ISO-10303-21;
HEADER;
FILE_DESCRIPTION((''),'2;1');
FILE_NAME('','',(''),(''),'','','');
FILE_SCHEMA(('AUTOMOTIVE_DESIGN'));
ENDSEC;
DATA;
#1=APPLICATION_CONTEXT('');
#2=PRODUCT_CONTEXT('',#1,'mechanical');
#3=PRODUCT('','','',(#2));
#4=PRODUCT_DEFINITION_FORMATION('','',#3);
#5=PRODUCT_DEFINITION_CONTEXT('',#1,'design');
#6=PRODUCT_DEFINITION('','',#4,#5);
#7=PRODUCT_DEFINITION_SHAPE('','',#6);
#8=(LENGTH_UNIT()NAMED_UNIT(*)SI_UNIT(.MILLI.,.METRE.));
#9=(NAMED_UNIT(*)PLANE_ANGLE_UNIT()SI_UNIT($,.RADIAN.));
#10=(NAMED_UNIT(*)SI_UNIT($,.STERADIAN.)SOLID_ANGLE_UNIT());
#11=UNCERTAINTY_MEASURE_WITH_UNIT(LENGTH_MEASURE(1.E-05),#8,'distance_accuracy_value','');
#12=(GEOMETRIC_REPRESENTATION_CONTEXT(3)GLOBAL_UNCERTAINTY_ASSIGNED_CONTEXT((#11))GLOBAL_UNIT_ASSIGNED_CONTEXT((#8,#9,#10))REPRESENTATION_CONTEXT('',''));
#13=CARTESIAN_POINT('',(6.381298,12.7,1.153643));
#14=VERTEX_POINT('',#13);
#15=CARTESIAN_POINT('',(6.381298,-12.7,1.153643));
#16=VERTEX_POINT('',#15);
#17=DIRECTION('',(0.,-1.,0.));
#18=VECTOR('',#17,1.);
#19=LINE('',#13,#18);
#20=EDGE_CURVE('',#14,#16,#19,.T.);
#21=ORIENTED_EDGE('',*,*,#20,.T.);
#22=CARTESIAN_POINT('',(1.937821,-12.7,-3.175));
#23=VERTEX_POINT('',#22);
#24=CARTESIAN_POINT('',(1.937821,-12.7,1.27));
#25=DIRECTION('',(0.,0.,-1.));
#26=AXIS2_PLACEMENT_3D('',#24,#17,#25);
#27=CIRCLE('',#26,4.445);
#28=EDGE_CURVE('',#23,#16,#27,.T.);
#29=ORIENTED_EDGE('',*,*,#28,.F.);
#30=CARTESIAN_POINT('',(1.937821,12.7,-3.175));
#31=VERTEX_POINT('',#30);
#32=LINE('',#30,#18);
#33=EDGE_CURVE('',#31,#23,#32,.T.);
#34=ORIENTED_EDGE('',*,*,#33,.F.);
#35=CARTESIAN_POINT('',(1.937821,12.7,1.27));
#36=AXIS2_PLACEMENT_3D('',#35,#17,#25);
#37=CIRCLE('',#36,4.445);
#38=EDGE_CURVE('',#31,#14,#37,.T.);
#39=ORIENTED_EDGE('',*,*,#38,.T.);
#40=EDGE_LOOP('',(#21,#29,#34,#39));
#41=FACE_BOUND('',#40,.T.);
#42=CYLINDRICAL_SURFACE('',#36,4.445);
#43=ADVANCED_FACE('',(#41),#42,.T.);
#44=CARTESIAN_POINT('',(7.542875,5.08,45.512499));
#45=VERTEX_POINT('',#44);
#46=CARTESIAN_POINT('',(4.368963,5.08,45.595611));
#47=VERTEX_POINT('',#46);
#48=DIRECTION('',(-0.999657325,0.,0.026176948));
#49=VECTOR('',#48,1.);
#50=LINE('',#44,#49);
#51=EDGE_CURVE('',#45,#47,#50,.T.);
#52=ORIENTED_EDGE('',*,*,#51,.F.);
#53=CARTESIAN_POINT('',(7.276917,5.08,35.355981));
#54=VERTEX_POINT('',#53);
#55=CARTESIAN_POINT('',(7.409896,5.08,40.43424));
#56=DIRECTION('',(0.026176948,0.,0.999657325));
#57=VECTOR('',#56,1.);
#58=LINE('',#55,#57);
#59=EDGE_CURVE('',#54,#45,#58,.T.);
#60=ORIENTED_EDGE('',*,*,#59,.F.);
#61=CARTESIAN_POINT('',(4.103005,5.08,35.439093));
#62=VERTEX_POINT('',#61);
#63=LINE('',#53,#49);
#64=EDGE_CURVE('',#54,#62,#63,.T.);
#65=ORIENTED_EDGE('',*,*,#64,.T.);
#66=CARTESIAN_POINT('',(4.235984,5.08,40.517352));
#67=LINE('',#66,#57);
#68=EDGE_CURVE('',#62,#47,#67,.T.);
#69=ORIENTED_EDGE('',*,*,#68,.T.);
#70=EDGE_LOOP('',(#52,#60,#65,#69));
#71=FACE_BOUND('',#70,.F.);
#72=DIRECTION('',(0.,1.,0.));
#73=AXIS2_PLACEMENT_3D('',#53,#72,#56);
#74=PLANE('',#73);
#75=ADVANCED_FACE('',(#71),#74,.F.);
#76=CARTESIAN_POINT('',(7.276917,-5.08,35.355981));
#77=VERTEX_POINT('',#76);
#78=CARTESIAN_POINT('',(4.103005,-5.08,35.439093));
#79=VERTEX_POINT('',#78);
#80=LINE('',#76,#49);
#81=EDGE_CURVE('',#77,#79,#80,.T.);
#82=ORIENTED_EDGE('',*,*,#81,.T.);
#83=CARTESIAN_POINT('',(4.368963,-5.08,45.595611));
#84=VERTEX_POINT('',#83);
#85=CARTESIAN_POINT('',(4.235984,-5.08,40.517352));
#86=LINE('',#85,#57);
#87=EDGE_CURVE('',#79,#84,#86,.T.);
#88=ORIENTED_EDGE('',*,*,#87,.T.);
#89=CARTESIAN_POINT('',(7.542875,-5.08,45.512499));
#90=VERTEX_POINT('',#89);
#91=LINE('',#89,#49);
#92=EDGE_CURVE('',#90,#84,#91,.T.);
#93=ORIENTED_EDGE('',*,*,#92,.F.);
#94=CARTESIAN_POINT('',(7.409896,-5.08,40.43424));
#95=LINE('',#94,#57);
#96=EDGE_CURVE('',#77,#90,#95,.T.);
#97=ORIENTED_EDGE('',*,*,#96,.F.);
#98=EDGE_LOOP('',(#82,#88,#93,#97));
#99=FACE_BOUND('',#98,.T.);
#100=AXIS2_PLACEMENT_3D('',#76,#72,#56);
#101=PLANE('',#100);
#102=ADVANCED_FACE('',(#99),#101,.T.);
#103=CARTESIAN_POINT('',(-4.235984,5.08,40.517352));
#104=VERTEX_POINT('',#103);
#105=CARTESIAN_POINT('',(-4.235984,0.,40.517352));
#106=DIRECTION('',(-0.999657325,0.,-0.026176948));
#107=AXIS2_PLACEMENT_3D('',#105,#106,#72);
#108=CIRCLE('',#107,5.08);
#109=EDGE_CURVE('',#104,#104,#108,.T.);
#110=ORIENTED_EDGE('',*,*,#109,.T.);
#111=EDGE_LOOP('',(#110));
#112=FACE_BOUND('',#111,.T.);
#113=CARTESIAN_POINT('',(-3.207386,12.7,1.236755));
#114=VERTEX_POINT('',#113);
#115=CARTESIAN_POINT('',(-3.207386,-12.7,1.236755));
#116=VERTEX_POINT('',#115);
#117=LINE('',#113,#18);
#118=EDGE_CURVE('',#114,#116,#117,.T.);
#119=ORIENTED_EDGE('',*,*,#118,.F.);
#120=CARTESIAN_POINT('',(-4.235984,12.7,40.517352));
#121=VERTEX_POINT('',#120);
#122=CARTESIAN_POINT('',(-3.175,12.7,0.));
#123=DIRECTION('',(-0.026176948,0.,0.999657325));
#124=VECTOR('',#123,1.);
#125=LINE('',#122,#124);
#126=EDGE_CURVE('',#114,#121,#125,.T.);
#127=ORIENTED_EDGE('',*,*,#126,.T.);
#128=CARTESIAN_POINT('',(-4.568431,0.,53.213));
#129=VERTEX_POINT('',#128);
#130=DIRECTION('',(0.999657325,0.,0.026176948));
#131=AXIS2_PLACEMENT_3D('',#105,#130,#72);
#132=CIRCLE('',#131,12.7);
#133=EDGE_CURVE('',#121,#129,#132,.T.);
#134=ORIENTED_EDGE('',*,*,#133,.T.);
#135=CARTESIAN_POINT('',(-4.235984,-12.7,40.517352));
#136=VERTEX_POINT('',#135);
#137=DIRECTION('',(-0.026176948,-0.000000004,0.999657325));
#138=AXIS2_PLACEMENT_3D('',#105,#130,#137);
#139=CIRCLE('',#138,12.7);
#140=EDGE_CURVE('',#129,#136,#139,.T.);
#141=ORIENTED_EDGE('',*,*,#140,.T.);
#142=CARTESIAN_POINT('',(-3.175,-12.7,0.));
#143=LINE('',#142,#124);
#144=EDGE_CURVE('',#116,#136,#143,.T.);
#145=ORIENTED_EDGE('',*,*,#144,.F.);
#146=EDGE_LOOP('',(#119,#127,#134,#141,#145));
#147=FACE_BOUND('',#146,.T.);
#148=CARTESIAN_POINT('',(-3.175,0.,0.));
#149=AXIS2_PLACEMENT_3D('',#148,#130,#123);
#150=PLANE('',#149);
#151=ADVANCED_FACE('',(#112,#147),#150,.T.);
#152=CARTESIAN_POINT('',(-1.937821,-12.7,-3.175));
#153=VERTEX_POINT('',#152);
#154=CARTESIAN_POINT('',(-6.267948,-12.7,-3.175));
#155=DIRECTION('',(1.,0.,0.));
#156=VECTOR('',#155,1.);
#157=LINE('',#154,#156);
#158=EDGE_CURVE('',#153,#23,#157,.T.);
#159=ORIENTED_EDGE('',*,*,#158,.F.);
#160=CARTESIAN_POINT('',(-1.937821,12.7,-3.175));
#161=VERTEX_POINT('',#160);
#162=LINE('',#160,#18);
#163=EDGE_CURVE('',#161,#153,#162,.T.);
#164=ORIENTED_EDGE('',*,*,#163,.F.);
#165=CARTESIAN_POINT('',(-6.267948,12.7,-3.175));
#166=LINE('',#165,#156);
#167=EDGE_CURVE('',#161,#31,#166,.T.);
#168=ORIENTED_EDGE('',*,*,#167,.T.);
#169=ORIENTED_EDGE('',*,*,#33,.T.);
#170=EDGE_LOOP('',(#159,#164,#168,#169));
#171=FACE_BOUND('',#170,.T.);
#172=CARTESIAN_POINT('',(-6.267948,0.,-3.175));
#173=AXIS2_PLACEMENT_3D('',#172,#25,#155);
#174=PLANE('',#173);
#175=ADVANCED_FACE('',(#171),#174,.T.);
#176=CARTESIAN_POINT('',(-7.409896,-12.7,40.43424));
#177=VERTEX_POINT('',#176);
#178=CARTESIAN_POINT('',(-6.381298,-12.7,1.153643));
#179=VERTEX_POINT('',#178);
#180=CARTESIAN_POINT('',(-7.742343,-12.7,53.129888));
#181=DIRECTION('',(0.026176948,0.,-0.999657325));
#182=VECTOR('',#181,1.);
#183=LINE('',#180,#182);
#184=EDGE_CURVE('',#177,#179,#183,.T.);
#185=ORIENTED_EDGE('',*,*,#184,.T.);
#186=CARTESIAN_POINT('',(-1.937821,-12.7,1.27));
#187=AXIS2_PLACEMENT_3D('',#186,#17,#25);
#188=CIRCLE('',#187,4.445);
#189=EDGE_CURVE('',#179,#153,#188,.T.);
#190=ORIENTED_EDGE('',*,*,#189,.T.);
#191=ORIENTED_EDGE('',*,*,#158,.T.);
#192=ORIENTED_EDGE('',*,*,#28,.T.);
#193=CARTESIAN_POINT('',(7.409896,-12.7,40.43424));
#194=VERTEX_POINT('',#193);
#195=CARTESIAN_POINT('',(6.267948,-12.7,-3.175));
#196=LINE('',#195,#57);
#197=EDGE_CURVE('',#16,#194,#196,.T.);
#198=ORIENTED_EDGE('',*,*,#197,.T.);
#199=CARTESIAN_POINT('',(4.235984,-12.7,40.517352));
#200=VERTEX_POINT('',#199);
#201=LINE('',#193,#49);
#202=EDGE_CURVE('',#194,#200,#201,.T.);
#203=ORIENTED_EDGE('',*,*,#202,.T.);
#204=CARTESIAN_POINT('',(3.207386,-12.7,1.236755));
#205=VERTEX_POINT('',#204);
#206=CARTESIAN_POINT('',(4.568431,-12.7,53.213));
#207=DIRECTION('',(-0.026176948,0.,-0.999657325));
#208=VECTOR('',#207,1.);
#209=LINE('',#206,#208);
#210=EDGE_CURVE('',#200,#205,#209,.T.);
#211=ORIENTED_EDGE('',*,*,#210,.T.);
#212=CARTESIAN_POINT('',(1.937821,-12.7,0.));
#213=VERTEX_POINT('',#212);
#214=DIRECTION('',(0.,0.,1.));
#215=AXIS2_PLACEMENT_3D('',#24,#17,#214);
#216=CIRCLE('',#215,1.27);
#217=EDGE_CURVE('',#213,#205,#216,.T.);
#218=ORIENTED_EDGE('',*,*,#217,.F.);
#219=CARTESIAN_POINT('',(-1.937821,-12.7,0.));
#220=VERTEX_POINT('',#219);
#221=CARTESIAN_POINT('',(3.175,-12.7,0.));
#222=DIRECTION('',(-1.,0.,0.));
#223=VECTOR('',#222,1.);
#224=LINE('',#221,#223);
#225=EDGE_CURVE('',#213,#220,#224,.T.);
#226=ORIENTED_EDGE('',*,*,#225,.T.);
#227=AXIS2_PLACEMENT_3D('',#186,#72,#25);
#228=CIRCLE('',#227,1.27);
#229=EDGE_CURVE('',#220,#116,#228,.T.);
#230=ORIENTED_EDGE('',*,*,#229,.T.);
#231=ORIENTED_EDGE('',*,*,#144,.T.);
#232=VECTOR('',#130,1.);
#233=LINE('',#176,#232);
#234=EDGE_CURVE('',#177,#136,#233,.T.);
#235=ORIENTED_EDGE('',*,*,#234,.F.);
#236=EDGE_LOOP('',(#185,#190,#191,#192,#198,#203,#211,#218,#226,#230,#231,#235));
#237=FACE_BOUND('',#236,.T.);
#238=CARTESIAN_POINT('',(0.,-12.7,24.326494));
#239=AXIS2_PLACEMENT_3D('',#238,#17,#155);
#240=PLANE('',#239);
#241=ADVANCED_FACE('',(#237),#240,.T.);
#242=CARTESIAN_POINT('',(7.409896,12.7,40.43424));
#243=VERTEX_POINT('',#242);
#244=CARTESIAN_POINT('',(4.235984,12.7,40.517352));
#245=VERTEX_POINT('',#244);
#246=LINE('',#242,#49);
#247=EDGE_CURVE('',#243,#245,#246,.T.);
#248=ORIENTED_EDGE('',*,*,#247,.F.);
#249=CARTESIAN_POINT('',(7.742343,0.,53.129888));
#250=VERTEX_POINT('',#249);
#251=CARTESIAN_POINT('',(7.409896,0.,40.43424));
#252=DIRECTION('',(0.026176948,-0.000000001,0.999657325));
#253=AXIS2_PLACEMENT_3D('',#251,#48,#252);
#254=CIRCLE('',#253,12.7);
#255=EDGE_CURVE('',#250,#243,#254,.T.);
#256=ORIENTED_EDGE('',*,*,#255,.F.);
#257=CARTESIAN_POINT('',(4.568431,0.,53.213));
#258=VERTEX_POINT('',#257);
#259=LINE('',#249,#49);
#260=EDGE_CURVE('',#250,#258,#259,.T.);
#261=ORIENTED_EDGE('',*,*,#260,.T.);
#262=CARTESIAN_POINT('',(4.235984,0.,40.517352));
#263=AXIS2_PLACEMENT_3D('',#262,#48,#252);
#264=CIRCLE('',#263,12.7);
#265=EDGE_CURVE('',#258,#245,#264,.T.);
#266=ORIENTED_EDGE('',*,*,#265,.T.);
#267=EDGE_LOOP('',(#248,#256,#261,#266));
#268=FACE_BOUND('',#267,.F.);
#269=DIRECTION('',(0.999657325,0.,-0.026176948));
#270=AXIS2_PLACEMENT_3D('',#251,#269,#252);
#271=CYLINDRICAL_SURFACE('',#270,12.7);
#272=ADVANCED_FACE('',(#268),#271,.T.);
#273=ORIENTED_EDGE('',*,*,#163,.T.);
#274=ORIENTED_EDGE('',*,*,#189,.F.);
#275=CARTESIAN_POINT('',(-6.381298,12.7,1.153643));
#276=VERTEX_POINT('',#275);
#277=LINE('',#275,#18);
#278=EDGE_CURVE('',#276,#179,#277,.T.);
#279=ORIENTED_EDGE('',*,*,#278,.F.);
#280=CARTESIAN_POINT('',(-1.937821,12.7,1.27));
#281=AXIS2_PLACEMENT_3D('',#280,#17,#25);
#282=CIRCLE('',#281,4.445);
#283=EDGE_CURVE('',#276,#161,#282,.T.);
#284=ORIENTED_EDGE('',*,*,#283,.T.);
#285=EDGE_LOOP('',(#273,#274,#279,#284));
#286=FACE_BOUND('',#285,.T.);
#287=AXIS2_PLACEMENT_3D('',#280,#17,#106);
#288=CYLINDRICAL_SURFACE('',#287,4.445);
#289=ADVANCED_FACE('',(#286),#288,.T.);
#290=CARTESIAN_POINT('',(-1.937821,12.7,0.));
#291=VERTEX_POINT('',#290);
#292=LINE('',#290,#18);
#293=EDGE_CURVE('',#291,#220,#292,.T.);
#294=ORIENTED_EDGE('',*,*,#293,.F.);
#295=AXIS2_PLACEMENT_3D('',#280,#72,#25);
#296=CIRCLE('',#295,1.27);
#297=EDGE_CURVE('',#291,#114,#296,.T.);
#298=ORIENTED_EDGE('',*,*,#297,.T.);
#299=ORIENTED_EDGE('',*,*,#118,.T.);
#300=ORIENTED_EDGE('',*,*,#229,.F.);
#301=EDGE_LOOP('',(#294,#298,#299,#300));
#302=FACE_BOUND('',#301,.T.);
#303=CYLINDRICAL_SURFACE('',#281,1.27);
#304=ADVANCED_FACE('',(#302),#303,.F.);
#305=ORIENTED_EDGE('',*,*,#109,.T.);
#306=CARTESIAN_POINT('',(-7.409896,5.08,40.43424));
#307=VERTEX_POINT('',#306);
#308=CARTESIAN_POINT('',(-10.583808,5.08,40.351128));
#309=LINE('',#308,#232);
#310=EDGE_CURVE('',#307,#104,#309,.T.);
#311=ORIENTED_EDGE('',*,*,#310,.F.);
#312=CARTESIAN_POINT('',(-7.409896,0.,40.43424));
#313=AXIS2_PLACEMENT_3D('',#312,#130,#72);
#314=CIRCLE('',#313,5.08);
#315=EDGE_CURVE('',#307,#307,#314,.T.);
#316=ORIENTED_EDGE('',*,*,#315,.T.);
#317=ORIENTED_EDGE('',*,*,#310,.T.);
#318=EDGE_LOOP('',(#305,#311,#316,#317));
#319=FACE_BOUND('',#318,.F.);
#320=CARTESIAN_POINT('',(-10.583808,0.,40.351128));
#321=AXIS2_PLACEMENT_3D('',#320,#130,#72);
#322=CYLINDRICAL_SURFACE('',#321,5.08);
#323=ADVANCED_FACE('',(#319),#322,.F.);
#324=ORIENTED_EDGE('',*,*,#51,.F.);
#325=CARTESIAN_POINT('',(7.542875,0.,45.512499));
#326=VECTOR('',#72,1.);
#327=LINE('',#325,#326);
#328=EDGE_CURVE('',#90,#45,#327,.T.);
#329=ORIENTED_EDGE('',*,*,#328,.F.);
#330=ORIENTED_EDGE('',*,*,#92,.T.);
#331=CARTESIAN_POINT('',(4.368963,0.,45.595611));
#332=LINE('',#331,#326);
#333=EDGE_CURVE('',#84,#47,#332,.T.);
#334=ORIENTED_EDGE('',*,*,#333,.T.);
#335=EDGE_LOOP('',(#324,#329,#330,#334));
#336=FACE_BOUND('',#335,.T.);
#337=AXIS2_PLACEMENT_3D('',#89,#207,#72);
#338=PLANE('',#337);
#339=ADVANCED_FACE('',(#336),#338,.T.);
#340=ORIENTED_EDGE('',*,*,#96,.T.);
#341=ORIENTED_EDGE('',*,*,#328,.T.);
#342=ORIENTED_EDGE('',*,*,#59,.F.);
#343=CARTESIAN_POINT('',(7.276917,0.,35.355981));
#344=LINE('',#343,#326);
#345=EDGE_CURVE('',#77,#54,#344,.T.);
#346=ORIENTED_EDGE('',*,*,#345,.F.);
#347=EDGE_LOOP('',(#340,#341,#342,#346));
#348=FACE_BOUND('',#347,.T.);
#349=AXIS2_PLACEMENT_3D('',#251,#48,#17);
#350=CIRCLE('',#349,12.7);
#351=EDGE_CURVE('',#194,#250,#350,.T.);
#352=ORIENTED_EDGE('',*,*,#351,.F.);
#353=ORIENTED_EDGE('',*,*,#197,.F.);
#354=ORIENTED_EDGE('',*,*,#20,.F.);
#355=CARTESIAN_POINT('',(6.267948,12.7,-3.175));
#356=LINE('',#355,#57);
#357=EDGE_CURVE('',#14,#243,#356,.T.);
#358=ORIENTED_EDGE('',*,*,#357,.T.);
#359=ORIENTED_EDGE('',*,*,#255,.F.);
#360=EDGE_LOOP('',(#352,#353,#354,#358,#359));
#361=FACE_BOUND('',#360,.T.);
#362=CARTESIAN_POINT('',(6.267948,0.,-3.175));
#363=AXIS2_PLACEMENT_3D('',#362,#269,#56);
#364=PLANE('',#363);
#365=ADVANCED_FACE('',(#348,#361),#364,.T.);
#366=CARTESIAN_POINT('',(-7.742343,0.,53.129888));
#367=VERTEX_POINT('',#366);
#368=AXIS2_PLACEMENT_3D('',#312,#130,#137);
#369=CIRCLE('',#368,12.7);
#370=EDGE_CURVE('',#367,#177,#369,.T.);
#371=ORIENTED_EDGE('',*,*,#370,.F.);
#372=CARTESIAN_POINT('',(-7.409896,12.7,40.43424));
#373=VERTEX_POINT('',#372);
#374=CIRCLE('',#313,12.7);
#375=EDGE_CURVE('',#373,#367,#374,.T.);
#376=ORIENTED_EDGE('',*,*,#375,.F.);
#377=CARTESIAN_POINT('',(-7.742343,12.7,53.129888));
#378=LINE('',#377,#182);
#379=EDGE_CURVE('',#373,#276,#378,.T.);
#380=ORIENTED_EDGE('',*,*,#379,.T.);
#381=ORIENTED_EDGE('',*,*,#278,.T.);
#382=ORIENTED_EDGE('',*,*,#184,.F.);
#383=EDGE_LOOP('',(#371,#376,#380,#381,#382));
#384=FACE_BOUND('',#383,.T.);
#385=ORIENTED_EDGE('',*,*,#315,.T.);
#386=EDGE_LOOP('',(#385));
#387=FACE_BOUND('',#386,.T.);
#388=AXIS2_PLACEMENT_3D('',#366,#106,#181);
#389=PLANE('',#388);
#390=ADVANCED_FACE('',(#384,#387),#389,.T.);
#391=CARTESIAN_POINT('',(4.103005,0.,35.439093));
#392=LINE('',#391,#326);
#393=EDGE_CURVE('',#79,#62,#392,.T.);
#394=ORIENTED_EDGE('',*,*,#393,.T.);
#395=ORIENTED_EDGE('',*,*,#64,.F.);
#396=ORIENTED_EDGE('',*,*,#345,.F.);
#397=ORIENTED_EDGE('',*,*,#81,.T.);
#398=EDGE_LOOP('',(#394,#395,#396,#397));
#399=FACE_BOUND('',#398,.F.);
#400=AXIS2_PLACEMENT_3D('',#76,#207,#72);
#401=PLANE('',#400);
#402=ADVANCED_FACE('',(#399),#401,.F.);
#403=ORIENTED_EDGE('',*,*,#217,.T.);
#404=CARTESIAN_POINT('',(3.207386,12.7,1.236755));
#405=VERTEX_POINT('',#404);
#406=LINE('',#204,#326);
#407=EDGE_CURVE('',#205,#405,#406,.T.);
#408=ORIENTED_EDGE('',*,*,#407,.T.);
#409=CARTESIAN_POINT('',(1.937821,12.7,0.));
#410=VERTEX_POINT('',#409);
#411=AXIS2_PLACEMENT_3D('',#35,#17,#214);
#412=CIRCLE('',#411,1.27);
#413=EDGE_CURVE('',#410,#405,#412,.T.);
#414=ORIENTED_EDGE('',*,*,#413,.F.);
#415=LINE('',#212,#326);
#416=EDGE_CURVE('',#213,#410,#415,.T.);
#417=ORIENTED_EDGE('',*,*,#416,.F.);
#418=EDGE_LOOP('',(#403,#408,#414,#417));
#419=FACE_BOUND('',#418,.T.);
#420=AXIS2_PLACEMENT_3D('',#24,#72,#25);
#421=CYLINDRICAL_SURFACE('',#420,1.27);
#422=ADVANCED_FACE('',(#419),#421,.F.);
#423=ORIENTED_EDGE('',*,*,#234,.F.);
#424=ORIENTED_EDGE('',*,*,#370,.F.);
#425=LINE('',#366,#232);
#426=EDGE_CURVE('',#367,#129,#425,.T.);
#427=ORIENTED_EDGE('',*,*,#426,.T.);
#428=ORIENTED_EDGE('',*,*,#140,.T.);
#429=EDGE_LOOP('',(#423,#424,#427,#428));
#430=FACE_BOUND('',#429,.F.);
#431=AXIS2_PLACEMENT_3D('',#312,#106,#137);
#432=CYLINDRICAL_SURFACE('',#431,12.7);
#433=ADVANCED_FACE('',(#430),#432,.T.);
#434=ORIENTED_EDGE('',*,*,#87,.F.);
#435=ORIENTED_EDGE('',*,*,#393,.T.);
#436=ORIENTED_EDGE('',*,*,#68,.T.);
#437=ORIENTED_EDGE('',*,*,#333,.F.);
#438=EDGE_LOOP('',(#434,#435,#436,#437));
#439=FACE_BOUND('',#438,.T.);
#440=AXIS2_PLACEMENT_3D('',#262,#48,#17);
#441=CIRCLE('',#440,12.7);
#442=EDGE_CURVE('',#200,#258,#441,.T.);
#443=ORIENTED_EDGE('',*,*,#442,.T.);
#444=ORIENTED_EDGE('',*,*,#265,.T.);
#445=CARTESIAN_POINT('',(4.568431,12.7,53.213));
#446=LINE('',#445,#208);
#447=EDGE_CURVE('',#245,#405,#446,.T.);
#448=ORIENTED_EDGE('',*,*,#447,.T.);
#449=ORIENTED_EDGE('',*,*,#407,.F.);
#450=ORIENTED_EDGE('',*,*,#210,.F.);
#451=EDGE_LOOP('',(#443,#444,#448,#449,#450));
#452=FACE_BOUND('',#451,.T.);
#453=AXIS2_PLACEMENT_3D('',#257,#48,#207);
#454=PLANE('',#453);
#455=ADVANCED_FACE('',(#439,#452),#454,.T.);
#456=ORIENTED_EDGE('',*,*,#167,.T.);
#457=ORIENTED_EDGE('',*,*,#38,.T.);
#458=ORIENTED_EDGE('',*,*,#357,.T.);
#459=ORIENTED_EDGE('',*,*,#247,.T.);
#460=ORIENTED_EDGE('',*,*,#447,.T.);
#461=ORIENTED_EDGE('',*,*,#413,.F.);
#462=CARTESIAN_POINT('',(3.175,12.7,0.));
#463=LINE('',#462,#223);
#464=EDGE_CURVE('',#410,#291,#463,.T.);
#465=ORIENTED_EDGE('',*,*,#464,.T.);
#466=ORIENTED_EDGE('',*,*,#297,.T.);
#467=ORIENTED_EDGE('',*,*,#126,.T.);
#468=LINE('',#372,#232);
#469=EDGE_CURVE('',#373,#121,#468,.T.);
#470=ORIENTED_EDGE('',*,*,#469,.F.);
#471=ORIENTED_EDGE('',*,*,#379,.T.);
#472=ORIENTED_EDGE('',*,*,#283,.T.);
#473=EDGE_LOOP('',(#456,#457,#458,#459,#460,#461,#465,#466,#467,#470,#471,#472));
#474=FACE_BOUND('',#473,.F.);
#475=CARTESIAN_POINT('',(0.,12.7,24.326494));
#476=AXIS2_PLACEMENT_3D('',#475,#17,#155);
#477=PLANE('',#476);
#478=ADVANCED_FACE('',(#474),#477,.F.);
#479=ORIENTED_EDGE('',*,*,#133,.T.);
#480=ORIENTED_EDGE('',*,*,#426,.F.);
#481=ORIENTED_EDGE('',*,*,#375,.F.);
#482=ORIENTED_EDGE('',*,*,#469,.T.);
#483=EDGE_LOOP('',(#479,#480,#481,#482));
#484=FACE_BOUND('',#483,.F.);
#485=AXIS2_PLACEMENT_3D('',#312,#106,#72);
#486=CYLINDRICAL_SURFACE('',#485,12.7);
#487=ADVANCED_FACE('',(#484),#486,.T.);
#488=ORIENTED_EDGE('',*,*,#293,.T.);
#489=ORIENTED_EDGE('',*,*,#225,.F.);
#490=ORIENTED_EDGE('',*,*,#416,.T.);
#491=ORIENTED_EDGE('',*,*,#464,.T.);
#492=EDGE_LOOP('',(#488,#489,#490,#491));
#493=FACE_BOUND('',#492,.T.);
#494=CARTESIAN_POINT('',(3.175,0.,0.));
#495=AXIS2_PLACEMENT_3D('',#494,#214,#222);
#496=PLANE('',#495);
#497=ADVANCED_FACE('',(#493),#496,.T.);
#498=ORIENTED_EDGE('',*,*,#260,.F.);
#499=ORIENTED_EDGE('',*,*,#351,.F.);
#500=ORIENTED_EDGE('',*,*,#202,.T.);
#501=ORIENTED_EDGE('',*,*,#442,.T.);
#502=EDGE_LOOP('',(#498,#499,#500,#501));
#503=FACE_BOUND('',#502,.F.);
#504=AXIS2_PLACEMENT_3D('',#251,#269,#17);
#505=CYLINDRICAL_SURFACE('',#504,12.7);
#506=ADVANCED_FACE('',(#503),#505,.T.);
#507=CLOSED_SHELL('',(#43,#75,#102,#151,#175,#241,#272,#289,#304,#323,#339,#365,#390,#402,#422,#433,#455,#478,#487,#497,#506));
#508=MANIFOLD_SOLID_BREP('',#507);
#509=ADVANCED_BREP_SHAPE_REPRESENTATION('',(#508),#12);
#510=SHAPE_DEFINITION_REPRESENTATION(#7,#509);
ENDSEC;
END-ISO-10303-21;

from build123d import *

# Parameters (mm, degrees)
F1_DEPTH      = 12.7
F1_DEPTH_BACK = 12.7
F2_W          = 10.16
F2_H          = 10.16
F3_DEPTH      = 3.175
F5_DEPTH      = 3.175
F6_R          = 1.27
F7_R          = 4.445
F8_D          = 10.16
F8_DEPTH      = 3.175
F8_TIP        = 3.0523719447


with BuildPart() as f1:
    # F0 (on Front) → F1 (new body, two sides)
    with BuildSketch(Plane.XZ) as f1_sk:
        Polygon((3.175, 0), (-3.175, 0), (-4.5684314445, 53.213), (-7.7423434513, 53.1298881891), (-6.2679480652, -3.175), (6.2679480652, -3.175), (7.7423434513, 53.1298881891), (4.5684314445, 53.213), align=None)
    extrude(amount=F1_DEPTH)
    extrude(f1_sk.sketch, amount=-F1_DEPTH_BACK)

    # F2 (on face) → F3 (cut, through all)
    with BuildSketch(Plane(origin=(6.3467363932, 0, -0.1661951414), x_dir=(0, 1, 0), z_dir=(0.999657325, 0, -0.0261769483))):
        with BuildLine():
            ThreePointArc((-12.7, 40.6143528277), (-8.9802561276, 49.5946089422), (-1.86e-08, 53.3143528277))
            Line((-1.86e-08, 53.3143528277), (-12.7, 53.3143528277))
            Line((-12.7, 53.3143528277), (-12.7, 40.6143528277))
        make_face()
        with BuildLine():
            ThreePointArc((-1.86e-08, 53.3143528277), (8.9802561145, 49.5946089553), (12.7, 40.6143528277))
            Line((12.7, 40.6143528277), (12.7, 53.3143528277))
            Line((12.7, 53.3143528277), (-1.86e-08, 53.3143528277))
        make_face()
        with Locations((0, 40.6143528277)):
            Rectangle(F2_W, F2_H)
    extrude(amount=-F3_DEPTH, mode=Mode.SUBTRACT)

    # F4 (on face) → F5 (cut, through all)
    with BuildSketch(Plane(origin=(-6.3467363932, 0, -0.1661951414), x_dir=(0, -1, 0), z_dir=(-0.999657325, 0, -0.0261769483))):
        with BuildLine():
            ThreePointArc((-12.7, 40.6143528277), (-8.9802561029, 49.594608967), (5.15e-08, 53.3143528277))
            Line((5.15e-08, 53.3143528277), (-12.7, 53.3143528277))
            Line((-12.7, 53.3143528277), (-12.7, 40.6143528277))
        make_face()
        with BuildLine():
            ThreePointArc((5.15e-08, 53.3143528277), (8.9802561393, 49.5946089305), (12.7, 40.6143528277))
            Line((12.7, 40.6143528277), (12.7, 53.3143528277))
            Line((12.7, 53.3143528277), (5.15e-08, 53.3143528277))
        make_face()
    extrude(amount=-F5_DEPTH, mode=Mode.SUBTRACT)

    # F6
    f6_edges = [f1.edges().sort_by_distance(p)[0] for p in [
        (3.175, 0, 0),
        (-3.175, 0, 0),
    ]]
    fillet(f6_edges, radius=F6_R)

    # F7
    f7_edges = [f1.edges().sort_by_distance(p)[0] for p in [
        (6.267948, 0, -3.175),
        (-6.267948, 0, -3.175),
    ]]
    fillet(f7_edges, radius=F7_R)

    # F8
    with Locations(Plane(origin=(-6.3467363932, 0, -0.1661951414), x_dir=(0, -1, 0), z_dir=(-0.999657325, 0, -0.0261769483))):
        with Locations((0, 40.6143528277)):
            Hole(F8_D / 2, depth=F8_DEPTH)
            with Locations((0, 0, -(F8_DEPTH + F8_TIP / 2))):  # 118° drill point
                Cone(0, F8_D / 2, F8_TIP, mode=Mode.SUBTRACT)


solid = f1.part
